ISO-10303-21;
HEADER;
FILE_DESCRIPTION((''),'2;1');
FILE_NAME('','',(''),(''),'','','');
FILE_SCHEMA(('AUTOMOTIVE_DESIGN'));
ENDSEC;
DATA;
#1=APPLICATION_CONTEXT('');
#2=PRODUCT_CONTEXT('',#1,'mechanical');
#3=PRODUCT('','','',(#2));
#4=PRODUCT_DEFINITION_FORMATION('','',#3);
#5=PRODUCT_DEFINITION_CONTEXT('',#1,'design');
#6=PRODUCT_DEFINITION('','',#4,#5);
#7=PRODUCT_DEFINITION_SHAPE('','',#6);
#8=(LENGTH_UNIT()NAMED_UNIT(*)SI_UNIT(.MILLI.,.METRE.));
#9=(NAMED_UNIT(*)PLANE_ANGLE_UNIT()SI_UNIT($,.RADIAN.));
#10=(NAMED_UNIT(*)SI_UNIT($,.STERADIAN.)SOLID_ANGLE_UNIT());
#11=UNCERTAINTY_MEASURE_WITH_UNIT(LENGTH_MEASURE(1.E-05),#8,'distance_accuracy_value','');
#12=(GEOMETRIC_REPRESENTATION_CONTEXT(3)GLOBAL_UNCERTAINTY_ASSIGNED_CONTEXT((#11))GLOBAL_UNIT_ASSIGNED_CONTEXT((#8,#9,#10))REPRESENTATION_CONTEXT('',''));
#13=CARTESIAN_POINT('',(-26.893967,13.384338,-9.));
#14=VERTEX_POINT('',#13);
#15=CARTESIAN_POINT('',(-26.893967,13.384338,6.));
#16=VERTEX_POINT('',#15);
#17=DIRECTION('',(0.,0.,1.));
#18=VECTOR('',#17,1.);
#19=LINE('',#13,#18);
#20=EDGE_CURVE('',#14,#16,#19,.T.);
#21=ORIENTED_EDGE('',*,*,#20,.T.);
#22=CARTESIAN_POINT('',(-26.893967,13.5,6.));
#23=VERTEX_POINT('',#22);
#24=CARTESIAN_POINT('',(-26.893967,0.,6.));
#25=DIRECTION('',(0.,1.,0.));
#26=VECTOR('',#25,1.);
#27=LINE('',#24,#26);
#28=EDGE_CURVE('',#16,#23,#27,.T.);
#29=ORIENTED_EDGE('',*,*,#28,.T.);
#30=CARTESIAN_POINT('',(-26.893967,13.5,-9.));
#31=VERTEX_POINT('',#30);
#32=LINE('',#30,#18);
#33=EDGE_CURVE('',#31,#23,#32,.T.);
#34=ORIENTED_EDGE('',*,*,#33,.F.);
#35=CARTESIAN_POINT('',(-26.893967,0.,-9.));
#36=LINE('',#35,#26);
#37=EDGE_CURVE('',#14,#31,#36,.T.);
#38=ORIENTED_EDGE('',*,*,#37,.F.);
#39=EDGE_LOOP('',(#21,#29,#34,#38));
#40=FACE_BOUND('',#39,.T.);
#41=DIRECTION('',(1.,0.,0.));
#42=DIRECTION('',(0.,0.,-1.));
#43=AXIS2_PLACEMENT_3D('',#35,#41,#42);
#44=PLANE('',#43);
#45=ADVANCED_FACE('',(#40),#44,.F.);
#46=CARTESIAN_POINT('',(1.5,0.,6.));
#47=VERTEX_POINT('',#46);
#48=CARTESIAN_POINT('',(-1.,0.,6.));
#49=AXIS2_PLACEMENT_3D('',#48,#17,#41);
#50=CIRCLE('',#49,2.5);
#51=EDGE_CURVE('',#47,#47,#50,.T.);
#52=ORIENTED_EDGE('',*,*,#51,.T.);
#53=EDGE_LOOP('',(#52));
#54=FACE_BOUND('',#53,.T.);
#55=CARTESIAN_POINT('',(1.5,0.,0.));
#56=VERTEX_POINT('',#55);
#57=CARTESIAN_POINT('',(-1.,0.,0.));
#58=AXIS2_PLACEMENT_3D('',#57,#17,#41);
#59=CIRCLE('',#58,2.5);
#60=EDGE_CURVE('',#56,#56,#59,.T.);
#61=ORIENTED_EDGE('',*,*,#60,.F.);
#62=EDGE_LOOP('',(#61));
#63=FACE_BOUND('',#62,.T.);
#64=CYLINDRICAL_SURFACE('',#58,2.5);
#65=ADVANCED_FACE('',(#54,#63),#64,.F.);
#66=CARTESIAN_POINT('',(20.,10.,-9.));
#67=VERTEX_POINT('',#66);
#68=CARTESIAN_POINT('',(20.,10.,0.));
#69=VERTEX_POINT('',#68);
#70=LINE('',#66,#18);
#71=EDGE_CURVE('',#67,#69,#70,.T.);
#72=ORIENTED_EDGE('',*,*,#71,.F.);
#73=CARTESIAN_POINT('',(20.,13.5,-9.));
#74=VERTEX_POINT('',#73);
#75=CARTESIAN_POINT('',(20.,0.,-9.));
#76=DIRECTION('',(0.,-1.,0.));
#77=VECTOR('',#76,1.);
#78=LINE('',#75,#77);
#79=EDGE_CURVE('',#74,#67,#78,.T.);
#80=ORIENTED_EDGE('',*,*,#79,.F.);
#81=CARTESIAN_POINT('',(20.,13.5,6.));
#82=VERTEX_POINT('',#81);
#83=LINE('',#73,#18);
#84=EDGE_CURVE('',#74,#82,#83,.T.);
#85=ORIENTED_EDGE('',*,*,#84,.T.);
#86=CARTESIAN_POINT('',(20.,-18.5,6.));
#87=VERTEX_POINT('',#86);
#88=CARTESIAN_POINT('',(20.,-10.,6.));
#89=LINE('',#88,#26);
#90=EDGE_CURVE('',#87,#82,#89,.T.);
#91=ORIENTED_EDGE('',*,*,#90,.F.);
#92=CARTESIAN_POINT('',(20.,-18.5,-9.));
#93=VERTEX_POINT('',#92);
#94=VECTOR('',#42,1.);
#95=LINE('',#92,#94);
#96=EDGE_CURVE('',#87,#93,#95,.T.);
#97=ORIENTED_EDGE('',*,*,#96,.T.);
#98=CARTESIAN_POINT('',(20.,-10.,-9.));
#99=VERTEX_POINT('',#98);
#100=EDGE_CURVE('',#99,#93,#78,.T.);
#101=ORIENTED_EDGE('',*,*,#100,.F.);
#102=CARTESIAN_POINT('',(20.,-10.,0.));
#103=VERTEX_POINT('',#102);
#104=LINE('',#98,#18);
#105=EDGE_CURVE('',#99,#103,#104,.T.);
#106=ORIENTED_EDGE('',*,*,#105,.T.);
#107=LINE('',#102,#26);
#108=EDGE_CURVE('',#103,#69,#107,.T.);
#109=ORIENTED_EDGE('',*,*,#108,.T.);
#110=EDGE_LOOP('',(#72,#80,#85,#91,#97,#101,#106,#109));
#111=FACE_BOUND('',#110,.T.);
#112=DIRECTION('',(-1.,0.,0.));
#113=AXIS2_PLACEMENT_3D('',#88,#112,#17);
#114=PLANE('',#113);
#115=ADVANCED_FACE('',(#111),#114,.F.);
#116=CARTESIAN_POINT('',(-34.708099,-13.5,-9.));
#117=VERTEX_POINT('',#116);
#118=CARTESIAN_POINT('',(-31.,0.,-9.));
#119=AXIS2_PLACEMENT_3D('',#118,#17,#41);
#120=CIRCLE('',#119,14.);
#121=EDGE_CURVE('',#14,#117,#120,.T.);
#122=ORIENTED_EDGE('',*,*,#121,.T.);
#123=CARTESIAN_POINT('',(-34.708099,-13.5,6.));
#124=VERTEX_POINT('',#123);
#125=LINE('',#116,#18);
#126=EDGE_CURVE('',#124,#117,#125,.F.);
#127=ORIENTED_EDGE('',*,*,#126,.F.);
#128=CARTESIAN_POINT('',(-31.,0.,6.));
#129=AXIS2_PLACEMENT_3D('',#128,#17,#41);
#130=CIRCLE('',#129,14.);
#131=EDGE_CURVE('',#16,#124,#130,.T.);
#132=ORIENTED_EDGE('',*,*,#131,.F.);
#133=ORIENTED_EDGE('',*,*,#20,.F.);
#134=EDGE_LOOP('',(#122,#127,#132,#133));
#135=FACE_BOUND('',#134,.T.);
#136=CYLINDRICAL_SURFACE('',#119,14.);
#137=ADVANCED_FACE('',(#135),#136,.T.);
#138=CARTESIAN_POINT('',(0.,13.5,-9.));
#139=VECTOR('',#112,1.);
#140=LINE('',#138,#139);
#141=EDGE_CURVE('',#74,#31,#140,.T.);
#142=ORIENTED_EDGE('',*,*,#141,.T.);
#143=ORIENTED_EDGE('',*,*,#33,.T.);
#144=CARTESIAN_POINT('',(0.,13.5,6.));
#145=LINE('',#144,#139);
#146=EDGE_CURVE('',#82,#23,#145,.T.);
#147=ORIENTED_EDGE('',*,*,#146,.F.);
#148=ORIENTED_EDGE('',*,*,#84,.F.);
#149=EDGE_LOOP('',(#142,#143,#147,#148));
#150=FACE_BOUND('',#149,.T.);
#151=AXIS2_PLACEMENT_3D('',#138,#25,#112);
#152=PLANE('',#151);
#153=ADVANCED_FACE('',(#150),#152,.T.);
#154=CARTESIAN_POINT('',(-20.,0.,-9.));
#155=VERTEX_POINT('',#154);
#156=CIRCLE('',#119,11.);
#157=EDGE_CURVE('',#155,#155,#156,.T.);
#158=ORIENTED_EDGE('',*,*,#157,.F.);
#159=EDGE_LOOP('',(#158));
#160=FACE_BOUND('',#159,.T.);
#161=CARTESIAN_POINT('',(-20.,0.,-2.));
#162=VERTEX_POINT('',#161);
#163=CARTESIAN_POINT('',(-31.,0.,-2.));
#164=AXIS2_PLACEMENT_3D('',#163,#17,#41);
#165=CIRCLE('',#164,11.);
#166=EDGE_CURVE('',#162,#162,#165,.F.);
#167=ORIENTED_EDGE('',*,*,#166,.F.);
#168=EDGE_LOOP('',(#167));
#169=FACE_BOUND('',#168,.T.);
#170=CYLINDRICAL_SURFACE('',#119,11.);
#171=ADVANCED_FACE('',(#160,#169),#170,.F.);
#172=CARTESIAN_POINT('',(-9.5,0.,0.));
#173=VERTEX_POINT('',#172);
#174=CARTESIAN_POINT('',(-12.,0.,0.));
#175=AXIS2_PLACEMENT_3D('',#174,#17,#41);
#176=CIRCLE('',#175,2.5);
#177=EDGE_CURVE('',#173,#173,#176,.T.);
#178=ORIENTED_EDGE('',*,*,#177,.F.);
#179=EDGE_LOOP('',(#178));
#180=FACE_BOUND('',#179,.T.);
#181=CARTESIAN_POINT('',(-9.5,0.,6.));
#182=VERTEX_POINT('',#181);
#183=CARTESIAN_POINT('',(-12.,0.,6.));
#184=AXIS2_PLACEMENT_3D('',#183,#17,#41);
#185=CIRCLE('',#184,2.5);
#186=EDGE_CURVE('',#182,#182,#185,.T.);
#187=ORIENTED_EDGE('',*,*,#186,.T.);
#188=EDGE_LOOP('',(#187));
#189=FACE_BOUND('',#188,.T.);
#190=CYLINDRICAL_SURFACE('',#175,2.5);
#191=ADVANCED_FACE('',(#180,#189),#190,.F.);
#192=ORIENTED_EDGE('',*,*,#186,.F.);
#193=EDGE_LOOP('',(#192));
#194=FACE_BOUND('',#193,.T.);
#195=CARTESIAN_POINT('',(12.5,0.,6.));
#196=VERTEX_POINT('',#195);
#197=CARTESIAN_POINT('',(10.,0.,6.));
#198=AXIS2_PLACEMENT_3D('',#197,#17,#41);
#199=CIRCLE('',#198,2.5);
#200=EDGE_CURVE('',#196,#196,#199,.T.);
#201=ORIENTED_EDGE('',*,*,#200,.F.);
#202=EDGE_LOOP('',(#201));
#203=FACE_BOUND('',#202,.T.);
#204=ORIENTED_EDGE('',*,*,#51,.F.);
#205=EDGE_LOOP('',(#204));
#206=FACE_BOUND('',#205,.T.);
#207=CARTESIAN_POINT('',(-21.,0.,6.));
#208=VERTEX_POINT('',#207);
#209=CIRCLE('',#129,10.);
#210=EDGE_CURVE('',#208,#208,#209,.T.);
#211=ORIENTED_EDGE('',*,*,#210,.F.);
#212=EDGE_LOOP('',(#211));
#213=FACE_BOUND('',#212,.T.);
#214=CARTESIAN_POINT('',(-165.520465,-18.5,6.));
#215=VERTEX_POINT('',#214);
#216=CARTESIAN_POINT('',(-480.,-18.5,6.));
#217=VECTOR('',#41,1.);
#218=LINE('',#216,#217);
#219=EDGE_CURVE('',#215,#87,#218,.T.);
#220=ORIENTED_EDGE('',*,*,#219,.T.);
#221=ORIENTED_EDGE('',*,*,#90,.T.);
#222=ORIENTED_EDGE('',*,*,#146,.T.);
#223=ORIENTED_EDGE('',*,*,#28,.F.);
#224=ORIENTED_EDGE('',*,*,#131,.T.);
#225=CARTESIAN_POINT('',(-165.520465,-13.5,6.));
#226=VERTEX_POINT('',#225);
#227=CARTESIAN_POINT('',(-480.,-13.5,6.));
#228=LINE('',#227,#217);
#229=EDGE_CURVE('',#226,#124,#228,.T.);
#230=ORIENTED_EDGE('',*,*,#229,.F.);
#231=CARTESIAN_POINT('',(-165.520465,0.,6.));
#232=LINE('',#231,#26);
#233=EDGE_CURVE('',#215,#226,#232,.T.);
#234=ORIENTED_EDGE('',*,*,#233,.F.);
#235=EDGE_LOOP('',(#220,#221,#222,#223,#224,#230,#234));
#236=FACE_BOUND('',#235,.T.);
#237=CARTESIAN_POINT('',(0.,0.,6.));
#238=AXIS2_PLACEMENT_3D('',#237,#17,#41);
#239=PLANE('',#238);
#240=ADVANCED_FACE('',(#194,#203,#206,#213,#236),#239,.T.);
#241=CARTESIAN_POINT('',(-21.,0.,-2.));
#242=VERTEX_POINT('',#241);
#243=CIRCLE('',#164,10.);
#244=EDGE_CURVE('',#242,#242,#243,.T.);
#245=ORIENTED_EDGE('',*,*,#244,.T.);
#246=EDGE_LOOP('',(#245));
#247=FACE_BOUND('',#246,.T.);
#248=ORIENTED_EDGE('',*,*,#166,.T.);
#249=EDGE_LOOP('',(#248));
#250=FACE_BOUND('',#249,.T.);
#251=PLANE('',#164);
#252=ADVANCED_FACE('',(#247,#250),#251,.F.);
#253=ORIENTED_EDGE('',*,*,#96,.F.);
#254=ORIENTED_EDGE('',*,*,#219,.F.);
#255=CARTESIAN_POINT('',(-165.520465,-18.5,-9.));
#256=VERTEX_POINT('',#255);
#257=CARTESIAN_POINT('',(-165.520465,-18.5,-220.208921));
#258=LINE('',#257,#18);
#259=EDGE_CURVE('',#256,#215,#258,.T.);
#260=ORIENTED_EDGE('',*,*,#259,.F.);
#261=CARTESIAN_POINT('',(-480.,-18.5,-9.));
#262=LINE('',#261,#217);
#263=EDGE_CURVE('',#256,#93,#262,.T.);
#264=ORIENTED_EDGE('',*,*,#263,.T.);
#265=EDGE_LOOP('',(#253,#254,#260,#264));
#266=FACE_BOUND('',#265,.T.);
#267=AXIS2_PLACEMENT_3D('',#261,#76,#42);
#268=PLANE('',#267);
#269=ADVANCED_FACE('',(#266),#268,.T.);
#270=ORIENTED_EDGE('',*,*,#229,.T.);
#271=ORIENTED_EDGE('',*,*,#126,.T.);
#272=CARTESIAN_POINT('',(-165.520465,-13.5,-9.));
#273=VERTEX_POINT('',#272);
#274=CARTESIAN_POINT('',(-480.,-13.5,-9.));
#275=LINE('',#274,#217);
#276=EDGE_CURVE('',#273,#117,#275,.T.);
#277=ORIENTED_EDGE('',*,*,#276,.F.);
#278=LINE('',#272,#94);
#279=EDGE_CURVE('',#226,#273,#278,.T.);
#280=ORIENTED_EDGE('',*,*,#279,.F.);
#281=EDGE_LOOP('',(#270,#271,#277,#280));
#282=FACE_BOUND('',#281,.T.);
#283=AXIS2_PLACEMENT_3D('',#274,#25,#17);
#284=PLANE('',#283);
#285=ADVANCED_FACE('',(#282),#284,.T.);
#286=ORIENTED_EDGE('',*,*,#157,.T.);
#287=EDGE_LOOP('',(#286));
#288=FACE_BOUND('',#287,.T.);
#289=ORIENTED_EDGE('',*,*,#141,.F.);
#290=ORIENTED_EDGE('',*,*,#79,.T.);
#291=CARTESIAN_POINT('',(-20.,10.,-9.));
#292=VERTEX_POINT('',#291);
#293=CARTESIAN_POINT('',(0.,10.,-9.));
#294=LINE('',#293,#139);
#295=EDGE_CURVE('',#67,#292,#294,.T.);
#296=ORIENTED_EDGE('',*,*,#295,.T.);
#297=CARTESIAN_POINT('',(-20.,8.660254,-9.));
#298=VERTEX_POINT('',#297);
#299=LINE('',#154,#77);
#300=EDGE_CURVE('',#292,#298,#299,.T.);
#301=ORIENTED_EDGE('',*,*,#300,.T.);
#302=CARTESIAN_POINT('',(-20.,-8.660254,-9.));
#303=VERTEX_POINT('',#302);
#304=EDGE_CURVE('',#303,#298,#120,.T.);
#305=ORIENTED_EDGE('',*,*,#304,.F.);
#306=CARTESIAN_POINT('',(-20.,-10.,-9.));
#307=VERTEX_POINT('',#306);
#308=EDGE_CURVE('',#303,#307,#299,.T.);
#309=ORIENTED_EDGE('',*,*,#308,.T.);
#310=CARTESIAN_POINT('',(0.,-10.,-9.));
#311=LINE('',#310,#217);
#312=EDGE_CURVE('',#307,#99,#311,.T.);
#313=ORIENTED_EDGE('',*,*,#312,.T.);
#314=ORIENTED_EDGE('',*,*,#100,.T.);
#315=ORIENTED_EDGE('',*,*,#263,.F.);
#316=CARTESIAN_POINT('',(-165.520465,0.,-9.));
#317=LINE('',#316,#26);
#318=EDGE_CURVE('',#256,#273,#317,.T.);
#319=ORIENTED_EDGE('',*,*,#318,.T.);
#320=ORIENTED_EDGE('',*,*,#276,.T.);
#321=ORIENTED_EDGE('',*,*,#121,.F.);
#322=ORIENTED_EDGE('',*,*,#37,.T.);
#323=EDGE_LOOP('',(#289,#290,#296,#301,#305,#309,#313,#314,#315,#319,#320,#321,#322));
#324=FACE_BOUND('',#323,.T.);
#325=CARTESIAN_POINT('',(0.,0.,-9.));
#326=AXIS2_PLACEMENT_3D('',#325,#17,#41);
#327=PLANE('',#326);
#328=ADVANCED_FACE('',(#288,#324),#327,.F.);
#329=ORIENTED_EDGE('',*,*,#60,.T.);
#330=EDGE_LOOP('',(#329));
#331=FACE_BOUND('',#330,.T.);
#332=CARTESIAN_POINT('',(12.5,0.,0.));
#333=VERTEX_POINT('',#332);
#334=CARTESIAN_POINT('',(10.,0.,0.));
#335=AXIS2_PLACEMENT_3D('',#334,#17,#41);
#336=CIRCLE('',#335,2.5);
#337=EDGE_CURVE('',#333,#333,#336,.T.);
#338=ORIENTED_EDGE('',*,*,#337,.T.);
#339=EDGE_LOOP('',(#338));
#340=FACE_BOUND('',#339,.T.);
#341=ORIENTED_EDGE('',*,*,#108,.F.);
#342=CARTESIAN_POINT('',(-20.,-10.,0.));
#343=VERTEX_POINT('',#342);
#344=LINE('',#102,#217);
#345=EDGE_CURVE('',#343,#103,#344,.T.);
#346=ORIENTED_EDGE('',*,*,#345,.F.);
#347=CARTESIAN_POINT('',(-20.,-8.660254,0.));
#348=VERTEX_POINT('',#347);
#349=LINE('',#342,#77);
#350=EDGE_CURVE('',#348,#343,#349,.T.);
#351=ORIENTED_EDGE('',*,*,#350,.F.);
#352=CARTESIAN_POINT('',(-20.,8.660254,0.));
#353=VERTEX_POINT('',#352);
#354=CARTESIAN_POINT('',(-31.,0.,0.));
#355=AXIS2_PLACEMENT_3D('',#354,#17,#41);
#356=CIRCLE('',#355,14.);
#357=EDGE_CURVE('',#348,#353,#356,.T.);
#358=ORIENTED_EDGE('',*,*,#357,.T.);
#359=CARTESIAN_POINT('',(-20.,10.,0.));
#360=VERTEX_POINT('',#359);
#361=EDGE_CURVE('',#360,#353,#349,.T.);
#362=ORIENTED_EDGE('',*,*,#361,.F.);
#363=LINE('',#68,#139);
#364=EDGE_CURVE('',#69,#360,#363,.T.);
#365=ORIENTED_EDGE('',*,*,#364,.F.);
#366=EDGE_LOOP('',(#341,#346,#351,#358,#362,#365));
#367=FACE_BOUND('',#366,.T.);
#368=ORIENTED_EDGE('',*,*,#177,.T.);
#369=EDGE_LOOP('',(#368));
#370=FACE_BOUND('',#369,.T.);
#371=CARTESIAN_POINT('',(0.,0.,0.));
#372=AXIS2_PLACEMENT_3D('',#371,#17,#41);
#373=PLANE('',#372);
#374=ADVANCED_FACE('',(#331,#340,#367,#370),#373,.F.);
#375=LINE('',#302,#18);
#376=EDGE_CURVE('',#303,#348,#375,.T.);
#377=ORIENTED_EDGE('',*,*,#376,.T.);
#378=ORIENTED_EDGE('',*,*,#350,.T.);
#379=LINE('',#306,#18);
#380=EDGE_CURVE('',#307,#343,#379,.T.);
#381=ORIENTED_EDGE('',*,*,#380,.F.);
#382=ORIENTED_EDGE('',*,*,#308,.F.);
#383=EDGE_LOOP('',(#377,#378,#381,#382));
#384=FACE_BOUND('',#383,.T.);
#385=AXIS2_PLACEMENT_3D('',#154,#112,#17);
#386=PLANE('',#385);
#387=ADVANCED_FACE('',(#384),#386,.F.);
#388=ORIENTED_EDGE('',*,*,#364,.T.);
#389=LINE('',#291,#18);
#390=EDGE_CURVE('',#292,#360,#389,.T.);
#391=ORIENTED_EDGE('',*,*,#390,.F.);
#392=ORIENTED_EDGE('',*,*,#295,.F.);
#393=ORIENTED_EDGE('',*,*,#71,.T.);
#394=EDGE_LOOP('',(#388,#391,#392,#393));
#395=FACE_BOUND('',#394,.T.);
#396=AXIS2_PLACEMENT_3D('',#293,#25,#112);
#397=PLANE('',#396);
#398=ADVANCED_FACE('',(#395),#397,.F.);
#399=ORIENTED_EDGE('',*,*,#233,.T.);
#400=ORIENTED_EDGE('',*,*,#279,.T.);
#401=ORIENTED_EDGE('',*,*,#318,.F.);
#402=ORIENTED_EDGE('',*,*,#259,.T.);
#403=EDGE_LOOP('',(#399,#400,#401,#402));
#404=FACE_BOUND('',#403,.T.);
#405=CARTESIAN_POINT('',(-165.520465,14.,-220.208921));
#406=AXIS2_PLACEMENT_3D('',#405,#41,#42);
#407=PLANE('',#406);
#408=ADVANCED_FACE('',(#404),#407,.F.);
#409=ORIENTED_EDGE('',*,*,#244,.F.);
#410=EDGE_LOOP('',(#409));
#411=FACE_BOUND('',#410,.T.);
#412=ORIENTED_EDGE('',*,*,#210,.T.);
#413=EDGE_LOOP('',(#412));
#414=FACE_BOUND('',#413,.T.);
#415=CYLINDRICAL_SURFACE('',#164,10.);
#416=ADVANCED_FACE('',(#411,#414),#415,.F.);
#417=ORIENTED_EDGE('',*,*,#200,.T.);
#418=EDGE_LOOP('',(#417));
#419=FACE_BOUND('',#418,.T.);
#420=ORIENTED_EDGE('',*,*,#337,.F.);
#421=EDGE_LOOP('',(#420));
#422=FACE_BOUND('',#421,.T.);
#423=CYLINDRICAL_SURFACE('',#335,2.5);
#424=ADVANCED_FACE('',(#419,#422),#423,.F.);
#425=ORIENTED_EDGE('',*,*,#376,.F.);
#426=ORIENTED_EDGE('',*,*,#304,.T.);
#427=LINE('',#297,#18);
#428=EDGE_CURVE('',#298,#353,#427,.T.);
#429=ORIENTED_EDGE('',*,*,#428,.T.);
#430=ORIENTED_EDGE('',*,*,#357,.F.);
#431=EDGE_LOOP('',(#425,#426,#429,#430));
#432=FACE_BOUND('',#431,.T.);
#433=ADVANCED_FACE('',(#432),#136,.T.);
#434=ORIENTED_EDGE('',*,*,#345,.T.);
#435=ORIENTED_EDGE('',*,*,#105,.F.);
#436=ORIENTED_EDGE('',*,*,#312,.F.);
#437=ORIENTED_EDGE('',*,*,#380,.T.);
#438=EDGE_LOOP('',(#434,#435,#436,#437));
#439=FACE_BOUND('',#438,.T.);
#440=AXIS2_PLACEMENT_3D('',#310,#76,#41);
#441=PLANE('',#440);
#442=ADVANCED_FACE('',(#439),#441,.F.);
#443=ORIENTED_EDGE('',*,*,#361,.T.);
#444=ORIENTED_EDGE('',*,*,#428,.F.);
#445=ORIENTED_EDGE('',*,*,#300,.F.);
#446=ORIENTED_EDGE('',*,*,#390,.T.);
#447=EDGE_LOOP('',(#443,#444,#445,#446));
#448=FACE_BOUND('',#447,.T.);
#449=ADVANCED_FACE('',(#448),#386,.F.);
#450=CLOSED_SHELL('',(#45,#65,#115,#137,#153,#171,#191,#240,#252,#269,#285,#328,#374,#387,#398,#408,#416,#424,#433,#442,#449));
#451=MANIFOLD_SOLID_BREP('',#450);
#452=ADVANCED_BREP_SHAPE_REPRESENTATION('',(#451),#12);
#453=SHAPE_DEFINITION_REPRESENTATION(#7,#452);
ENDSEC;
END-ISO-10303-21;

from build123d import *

# Parameters (mm, degrees)
SKETCH_1_W          = 40
SKETCH_1_H          = 20
EXTRUDE_1_DEPTH     = 6
SKETCH_2_R          = 2.5
CUT_EXTRUDE_1_DEPTH = 24.151673806
EXTRUDE_START       = -15
EXTRUDE_2_OUTLINE_R = 11
EXTRUDE_2_DEPTH     = 15
EXTRUDE_START_2     = -8
SKETCH_5_R          = 11
SKETCH_5_R_2        = 10
EXTRUDE_3_DEPTH     = 8
SKETCH_10_W         = 15
SKETCH_10_H         = 5
EXTRUDE_4_DEPTH     = 500
SKETCH_11_W         = 11.491200589
SKETCH_11_H         = 5.122583395
EXTRUDE_5_DEPTH     = 15
SKETCH_13_W         = 324.526705223
SKETCH_13_H         = 235.156452348
CUT_EXTRUDE_2_DEPTH = 482.183177179
SKETCH_14_W         = 2.170521585
SKETCH_14_H         = 5
CUT_EXTRUDE_3_DEPTH = 314.479535155


# Read off the part's stored shape, not the designer's step: 凸台-拉伸2
with BuildPart() as part:
    # 草图1 → 凸台-拉伸1 (new body)
    with BuildSketch(Plane.XY):
        Rectangle(SKETCH_1_W, SKETCH_1_H)
    extrude(amount=EXTRUDE_1_DEPTH)

    # 草图2 → 切除-拉伸1 (cut, through all)
    with BuildSketch(Plane.XY.offset(6)):
        with Locations((10, 0)):
            Circle(SKETCH_2_R)
        with Locations((-1, 0)):
            Circle(SKETCH_2_R)
        with Locations((-12, 0)):
            Circle(SKETCH_2_R)
    extrude(amount=-CUT_EXTRUDE_1_DEPTH, mode=Mode.SUBTRACT)

    # 凸台-拉伸2 outline → 凸台-拉伸2 (add)
    with BuildSketch(Plane.XY.offset(6).offset(EXTRUDE_START)):
        with BuildLine():
            Line((20, 10), (20, 13.5))
            Line((20, 13.5), (-26.893967141, 13.5))
            Line((-26.893967141, 13.5), (-26.893967141, 13.384337644))
            ThreePointArc((-26.893967141, 13.384337644), (-45, 0), (-26.893967141, -13.384337644))
            Line((-26.893967141, -13.384337644), (-26.893967141, -13.5))
            Line((-26.893967141, -13.5), (20, -13.5))
            Line((20, -13.5), (20, -10))
            Line((20, -10), (-20, -10))
            Line((-20, -10), (-20, -8.660254038))
            ThreePointArc((-20, -8.660254038), (-17, 0), (-20, 8.660254038))
            Line((-20, 8.660254038), (-20, 10))
            Line((-20, 10), (20, 10))
        make_face()
        with Locations((-31, 0)):
            Circle(EXTRUDE_2_OUTLINE_R, mode=Mode.SUBTRACT)
    extrude(amount=EXTRUDE_2_DEPTH)

    # 草图5 → 凸台-拉伸3 (add)
    with BuildSketch(Plane.XY.offset(6).offset(EXTRUDE_START_2)):
        with Locations((-31, 0)):
            Circle(SKETCH_5_R)
        with Locations((-31, 0)):
            Circle(SKETCH_5_R_2, mode=Mode.SUBTRACT)
    extrude(amount=EXTRUDE_3_DEPTH)

    # 草图10 → 凸台-拉伸4 (add)
    with BuildSketch(Plane(origin=(20, 0, 0), x_dir=(0, 0, -1), z_dir=(1, 0, 0))):
        with Locations((1.5, -16)):
            Rectangle(SKETCH_10_W, SKETCH_10_H)
    extrude(amount=-EXTRUDE_4_DEPTH)

    # 草图11 → 凸台-拉伸5 (add, through all)
    with BuildSketch(Plane(origin=(0, 0, -9), x_dir=(-1, 0, 0), z_dir=(0, 0, -1))):
        with Locations((27.78271332, -13.925059853)):
            Rectangle(SKETCH_11_W, SKETCH_11_H)
    extrude(amount=-EXTRUDE_5_DEPTH)

    # 草图13 → 切除-拉伸2 (cut, through all)
    with BuildSketch(Plane.XZ.offset(18.5)):
        with Locations((-327.783817457, -102.630695063)):
            Rectangle(SKETCH_13_W, SKETCH_13_H)
    extrude(amount=-CUT_EXTRUDE_2_DEPTH, mode=Mode.SUBTRACT)

    # 草图14 → 切除-拉伸3 (cut)
    with BuildSketch(Plane.ZY.offset(480)):
        with Locations((-7.914739208, -16)):
            Rectangle(SKETCH_14_W, SKETCH_14_H)
    extrude(amount=-CUT_EXTRUDE_3_DEPTH, mode=Mode.SUBTRACT)


solid = part.part
